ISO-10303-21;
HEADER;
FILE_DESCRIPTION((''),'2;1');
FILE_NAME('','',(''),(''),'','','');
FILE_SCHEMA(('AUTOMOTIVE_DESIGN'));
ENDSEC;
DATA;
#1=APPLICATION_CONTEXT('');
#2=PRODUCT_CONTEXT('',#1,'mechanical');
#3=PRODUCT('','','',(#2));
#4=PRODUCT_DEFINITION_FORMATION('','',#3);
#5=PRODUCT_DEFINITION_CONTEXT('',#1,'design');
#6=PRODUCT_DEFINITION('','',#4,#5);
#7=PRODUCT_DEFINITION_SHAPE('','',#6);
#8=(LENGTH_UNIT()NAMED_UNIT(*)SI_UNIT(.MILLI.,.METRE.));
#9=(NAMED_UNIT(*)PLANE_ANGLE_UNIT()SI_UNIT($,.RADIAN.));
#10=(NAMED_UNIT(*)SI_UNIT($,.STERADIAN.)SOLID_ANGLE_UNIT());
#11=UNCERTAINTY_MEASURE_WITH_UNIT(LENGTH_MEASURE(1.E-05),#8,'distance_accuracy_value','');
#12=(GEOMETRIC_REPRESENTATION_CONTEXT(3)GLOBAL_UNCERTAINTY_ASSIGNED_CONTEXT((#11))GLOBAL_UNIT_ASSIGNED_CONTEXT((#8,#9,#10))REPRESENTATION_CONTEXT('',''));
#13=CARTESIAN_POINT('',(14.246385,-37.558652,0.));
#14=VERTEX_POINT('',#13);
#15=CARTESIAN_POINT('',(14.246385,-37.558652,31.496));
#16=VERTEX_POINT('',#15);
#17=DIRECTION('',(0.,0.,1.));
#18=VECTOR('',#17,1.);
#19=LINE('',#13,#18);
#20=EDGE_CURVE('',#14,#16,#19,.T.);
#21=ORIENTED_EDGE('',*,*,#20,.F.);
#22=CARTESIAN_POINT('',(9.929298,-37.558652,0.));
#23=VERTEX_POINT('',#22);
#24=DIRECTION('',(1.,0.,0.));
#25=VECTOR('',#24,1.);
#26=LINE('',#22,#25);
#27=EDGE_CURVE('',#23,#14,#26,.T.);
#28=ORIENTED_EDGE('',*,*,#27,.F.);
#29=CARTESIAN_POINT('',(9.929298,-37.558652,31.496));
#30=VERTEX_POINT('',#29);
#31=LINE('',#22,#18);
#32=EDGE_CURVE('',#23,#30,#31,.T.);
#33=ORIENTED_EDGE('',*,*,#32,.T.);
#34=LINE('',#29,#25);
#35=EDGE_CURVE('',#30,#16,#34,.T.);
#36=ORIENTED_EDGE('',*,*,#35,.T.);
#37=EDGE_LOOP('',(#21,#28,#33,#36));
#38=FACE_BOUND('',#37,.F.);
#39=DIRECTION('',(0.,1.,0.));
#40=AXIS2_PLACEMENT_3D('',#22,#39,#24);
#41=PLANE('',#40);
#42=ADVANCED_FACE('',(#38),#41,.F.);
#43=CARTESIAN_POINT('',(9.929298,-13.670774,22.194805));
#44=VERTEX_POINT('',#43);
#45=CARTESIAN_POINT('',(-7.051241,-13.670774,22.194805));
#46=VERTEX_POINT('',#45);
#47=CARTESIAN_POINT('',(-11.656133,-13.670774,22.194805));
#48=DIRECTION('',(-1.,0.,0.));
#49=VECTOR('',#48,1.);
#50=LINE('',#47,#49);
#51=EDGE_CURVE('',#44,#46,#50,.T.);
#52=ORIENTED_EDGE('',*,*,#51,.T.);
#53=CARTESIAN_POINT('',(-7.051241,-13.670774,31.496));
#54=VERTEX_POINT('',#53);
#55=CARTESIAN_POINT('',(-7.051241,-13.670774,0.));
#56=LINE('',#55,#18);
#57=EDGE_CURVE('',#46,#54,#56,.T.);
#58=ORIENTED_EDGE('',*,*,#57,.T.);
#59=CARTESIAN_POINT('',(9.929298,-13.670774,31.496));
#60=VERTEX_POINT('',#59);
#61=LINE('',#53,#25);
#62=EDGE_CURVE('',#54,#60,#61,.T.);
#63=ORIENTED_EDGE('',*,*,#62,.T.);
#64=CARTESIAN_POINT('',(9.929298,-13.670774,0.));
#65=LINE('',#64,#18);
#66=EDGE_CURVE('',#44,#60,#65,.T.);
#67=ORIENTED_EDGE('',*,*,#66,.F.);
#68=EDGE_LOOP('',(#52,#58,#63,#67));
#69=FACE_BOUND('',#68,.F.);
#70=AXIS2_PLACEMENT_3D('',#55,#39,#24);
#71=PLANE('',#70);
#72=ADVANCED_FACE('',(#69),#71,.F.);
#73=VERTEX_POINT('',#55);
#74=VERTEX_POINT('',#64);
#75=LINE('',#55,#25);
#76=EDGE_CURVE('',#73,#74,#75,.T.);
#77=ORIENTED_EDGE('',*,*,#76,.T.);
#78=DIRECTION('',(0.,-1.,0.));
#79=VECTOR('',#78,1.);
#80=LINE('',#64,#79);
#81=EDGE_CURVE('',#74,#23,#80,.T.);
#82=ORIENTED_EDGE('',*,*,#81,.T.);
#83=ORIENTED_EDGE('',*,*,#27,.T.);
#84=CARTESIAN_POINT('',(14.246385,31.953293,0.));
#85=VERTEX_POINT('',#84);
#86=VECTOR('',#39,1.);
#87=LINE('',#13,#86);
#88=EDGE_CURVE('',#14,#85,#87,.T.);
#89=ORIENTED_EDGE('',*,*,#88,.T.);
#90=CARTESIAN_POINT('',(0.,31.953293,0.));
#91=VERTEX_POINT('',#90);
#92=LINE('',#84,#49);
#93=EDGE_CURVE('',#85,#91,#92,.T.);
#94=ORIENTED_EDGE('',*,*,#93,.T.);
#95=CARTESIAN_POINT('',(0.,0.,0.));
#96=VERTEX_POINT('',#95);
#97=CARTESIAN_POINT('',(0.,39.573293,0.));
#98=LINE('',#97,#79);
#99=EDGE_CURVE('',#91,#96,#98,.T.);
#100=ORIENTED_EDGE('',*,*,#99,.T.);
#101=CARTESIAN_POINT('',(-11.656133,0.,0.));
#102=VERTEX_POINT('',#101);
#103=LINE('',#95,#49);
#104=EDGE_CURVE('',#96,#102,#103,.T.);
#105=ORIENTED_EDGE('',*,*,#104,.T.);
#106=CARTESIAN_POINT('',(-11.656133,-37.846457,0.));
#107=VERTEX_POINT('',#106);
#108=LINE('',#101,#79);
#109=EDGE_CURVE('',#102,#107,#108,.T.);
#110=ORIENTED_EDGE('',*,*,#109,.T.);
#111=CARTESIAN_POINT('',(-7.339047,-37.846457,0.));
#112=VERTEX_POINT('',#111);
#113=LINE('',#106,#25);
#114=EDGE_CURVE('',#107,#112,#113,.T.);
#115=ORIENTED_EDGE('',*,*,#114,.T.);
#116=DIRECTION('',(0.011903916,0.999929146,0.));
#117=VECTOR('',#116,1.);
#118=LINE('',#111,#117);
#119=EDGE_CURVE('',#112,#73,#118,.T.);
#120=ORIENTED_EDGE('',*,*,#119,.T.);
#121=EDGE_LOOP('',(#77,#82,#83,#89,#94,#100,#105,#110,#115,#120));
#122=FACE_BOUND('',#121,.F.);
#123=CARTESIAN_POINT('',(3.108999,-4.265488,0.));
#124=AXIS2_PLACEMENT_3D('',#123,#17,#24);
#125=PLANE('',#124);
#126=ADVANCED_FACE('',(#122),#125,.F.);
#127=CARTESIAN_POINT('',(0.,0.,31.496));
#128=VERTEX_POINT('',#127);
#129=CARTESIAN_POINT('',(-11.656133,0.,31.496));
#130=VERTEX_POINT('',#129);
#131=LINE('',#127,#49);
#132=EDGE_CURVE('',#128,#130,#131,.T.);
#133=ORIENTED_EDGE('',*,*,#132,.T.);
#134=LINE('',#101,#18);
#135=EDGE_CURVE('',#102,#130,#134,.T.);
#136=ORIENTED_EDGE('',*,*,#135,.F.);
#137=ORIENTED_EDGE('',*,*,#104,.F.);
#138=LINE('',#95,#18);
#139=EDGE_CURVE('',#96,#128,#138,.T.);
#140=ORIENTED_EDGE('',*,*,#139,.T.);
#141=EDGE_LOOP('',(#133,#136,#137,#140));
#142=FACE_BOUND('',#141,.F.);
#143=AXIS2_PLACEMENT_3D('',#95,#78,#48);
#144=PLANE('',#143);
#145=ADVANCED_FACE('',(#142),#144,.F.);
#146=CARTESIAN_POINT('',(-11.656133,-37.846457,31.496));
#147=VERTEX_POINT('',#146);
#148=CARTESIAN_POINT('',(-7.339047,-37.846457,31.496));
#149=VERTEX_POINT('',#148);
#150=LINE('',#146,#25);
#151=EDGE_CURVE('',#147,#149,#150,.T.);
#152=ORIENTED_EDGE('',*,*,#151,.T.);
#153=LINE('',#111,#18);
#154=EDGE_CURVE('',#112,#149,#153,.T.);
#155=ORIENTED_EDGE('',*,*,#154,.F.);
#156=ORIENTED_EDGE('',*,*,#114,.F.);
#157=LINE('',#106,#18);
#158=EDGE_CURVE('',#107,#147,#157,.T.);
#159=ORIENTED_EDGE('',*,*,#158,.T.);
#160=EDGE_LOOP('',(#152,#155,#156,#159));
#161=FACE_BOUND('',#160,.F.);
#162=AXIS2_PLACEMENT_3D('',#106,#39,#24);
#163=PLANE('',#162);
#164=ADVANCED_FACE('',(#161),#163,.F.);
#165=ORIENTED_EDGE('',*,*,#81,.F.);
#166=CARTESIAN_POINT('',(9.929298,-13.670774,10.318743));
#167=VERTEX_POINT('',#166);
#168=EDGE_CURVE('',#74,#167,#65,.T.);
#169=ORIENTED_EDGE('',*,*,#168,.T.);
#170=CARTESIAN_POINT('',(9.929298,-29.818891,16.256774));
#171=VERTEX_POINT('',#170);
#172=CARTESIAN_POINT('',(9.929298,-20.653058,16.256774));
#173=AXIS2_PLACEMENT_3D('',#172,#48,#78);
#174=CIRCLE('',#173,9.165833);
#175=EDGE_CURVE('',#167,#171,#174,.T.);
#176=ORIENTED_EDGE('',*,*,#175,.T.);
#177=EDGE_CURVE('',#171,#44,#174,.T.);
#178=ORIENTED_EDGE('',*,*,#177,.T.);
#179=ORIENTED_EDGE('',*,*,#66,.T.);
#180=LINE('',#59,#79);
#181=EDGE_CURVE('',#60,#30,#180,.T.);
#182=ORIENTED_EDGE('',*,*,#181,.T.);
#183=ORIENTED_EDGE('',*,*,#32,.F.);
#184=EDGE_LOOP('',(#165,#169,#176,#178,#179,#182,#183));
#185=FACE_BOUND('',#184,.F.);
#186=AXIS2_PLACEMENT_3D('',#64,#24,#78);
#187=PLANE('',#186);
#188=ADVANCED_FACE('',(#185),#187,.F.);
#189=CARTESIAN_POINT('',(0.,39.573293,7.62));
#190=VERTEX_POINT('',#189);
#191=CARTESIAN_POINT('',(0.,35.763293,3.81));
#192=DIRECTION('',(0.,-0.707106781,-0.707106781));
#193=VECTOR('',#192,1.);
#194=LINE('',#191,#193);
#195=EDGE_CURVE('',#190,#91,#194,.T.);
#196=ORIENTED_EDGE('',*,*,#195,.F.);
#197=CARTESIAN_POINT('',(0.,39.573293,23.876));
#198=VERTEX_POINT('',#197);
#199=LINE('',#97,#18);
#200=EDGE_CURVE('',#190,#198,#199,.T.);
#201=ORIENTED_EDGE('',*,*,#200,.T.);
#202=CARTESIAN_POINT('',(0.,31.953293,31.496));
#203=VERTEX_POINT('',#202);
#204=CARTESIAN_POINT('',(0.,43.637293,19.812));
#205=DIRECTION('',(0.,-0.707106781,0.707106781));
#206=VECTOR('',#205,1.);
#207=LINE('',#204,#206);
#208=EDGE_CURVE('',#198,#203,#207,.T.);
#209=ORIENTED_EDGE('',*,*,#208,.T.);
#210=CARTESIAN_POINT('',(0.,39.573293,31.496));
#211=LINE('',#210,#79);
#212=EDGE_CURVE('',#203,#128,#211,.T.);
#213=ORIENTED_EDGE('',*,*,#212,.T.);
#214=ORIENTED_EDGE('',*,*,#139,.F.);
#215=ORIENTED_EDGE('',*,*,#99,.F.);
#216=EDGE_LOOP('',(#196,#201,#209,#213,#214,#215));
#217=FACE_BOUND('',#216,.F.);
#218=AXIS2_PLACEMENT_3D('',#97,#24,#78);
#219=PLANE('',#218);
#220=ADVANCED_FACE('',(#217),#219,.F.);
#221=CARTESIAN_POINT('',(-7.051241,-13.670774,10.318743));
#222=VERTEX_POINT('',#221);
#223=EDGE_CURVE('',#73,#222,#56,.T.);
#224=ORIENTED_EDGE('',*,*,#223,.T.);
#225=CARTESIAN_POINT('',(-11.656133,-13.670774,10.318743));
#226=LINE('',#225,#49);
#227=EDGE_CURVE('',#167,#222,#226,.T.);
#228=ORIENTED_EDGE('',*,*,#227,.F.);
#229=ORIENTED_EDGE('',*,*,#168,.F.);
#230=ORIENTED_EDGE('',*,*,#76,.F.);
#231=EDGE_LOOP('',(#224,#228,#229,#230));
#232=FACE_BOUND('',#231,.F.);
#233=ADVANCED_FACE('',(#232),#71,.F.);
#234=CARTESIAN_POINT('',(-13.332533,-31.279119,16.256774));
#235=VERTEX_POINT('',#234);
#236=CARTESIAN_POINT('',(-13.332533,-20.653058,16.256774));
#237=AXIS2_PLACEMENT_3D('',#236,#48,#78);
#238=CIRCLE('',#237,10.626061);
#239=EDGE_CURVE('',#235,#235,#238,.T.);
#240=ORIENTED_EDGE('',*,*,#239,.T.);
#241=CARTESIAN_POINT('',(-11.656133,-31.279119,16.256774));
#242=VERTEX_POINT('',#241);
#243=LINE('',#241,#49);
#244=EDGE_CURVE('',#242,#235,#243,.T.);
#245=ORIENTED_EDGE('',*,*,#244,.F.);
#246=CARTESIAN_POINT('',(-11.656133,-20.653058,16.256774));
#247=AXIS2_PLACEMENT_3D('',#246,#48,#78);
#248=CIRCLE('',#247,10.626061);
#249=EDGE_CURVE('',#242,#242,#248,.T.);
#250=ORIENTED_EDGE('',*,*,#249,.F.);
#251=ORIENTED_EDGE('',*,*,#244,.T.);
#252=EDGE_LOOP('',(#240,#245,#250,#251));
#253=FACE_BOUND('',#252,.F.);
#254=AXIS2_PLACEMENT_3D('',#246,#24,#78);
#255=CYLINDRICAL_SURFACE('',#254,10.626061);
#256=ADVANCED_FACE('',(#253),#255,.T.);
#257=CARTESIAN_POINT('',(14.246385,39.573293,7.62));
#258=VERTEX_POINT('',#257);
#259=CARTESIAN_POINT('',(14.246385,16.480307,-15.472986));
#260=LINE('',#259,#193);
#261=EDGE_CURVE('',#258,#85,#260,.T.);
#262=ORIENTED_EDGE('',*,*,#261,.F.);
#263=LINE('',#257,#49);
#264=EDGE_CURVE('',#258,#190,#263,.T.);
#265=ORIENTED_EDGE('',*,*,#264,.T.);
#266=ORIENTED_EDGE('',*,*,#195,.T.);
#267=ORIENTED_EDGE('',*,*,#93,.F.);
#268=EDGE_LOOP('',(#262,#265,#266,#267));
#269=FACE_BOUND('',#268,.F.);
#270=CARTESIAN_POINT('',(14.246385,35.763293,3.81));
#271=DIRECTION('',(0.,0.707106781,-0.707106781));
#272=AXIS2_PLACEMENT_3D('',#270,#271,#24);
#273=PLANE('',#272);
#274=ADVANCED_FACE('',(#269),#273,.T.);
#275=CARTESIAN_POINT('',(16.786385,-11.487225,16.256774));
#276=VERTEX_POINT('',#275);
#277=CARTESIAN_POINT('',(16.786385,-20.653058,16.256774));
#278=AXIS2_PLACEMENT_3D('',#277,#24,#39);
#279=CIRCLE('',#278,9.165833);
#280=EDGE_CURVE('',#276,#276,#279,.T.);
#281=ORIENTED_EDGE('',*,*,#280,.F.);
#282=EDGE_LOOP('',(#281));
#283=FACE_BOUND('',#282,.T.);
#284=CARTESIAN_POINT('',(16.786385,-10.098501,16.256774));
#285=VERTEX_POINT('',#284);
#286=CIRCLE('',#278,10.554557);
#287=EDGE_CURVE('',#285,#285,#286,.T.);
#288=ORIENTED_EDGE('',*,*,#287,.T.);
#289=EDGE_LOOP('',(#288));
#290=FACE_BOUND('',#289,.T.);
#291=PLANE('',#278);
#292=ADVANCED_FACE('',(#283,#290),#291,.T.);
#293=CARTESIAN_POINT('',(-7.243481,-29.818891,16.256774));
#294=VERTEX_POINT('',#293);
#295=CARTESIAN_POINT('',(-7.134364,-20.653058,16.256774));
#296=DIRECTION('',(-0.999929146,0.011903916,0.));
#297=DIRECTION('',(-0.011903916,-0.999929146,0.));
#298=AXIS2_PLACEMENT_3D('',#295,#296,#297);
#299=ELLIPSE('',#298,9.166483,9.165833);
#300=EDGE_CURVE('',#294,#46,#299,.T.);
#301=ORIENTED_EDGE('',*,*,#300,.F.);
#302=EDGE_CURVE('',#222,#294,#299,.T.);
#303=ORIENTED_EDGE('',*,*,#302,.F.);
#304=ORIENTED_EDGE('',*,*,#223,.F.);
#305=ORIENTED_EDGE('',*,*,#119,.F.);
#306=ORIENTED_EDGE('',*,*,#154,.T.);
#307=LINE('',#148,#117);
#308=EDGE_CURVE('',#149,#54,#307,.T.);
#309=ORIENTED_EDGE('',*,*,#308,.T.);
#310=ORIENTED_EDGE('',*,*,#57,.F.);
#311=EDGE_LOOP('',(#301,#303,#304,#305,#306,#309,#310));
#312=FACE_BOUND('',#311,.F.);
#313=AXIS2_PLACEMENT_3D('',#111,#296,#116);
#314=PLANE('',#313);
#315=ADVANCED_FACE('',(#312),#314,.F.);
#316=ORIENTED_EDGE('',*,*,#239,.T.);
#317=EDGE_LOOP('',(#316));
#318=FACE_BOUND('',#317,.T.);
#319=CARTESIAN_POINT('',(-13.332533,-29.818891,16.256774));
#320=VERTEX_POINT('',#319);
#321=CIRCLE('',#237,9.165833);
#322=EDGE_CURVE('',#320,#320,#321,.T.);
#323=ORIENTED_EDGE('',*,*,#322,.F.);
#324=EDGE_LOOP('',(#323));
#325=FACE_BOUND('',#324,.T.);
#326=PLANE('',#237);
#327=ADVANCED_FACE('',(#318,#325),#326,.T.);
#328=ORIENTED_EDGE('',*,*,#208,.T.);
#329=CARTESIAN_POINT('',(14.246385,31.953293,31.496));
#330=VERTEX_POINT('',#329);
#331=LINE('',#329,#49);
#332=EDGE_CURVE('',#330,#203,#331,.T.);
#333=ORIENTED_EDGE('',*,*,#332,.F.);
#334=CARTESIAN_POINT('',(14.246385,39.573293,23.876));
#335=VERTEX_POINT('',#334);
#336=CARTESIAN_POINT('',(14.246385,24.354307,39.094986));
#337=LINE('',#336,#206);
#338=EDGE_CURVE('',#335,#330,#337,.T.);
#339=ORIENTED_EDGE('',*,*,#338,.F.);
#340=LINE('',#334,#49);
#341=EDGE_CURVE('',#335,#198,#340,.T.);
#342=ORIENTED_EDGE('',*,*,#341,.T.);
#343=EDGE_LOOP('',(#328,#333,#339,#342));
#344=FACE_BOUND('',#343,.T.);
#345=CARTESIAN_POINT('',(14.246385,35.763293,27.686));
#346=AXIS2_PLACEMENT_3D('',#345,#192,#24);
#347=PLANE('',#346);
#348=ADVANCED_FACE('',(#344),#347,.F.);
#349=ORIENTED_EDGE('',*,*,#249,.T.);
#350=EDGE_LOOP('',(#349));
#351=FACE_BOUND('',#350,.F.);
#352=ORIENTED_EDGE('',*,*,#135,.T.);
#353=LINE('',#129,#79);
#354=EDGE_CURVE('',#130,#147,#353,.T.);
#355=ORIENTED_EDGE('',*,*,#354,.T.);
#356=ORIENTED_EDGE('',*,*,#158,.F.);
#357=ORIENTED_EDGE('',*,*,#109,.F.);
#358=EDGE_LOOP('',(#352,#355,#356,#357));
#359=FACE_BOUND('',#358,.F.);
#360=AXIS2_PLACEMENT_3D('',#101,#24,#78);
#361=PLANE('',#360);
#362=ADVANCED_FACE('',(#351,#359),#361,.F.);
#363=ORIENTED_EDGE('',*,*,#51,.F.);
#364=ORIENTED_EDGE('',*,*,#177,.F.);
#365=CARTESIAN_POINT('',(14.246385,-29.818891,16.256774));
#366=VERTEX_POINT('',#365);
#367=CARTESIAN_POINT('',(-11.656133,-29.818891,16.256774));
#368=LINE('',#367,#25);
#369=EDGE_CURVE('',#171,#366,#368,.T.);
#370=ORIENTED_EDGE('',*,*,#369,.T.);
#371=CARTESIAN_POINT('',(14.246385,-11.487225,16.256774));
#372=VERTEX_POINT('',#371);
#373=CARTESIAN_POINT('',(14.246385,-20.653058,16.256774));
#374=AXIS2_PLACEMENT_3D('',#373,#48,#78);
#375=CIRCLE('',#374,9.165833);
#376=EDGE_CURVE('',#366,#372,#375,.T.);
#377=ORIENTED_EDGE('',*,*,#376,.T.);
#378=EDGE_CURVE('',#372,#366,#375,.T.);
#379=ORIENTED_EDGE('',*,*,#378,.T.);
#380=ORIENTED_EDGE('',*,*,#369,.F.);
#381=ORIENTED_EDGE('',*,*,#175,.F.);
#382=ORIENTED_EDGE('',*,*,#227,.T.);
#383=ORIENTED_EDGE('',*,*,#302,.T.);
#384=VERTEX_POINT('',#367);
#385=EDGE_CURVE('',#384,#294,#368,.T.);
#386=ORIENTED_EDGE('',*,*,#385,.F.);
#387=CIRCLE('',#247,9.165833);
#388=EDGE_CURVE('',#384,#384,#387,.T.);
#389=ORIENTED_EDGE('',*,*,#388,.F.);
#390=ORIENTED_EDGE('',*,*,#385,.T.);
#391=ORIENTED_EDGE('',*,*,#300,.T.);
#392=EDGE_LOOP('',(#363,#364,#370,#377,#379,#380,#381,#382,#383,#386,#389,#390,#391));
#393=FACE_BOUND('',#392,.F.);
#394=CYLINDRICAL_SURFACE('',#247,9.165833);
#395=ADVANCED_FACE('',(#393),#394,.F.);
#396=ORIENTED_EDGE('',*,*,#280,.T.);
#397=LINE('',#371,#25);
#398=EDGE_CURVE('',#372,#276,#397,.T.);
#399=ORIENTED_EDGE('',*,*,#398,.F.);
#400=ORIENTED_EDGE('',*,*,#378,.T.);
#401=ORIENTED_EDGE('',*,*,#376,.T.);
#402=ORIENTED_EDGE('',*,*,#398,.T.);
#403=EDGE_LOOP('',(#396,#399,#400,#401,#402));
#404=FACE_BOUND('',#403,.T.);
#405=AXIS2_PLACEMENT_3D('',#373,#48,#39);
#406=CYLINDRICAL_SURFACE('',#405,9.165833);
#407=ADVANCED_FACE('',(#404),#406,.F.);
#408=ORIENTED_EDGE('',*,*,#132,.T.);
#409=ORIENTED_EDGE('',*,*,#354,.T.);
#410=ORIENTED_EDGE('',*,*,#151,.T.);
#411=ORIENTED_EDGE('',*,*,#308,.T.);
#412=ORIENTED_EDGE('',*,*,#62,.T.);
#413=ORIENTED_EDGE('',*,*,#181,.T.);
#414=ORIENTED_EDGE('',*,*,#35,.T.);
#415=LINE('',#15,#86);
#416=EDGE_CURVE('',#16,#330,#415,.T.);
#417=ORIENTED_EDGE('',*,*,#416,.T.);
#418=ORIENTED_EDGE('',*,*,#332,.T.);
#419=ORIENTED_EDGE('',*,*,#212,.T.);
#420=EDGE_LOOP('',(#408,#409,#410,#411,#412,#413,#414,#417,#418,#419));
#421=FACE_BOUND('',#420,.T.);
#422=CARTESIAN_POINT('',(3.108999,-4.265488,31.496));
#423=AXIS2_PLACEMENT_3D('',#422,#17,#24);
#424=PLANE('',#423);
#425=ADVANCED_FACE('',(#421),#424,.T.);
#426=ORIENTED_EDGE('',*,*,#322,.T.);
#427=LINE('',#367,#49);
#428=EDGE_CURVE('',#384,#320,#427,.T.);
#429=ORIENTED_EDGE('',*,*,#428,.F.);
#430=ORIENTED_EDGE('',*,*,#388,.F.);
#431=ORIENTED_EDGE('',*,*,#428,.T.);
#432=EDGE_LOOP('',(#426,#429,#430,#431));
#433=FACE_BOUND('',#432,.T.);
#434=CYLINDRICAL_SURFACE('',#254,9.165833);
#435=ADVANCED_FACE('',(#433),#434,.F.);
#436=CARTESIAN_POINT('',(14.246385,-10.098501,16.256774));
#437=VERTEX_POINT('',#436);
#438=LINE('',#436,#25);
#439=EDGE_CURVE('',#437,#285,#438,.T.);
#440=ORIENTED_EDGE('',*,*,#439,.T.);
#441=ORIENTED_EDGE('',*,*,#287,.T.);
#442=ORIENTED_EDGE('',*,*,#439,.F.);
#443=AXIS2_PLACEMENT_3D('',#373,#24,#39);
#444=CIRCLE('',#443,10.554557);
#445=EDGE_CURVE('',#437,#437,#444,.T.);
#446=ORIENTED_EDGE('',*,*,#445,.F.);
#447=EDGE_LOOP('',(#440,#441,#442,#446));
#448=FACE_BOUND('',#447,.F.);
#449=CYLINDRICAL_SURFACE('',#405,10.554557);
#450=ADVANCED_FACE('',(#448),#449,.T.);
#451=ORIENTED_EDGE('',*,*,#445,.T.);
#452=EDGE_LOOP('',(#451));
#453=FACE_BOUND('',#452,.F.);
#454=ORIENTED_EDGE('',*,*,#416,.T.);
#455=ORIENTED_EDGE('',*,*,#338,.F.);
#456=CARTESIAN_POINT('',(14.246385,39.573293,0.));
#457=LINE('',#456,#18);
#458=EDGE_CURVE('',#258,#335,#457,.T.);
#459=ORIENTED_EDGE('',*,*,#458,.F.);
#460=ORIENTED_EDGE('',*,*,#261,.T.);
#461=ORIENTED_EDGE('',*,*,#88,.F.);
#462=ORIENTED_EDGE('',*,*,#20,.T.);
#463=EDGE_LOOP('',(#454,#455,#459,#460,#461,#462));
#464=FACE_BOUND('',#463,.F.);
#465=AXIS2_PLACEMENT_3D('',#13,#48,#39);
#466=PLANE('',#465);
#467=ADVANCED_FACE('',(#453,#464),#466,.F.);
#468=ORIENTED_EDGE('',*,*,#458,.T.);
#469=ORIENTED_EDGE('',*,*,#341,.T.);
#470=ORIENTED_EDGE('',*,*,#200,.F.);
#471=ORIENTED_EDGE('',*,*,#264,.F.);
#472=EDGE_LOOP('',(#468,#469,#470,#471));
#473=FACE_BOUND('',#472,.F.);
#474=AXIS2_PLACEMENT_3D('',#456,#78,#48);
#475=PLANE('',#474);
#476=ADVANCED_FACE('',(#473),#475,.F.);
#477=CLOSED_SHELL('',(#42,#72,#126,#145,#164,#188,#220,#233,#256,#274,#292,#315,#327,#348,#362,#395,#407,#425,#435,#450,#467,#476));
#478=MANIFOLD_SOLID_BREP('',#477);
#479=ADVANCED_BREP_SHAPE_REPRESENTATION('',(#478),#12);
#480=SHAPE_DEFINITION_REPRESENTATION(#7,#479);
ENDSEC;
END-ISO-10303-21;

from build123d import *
from build123d import SkipClean  # not in build123d's __all__

# Parameters (mm, degrees)
F1_DEPTH = 31.496
F3_SIZE  = 7.62
F2_R     = 9.165833061
F4_DEPTH = 25.9035180712
F2_R_2   = 10.6260607341
F5_DEPTH = 1.6764
F6_R     = 10.5545569786
F6_R_2   = 9.165833061
F7_DEPTH = 2.54


with BuildPart() as f1:
    # F0 (on Top) → F1 (new body)
    with BuildSketch(Plane.XY):
        Polygon((0, 39.5732931793), (0, 0), (-11.656133458, 0), (-11.656133458, -37.8464572132), (-7.3390468024, -37.8464572132), (-7.0512411185, -13.6707741767), (9.9292984232, -13.6707741767), (9.9292984232, -37.5586524606), (14.2463846132, -37.5586524606), (14.2463846132, 0), (14.2463846132, 39.5732931793), align=None)
    extrude(amount=F1_DEPTH)

    # F3
    f3_edges = [f1.edges().sort_by_distance(p)[0] for p in [
        (7.123192, 39.573293, 31.496),
        (7.123192, 39.573293, 0),
    ]]
    chamfer(f3_edges, length=F3_SIZE)

    # F2 (on face) → F4 (cut, through all)
    with BuildSketch(Plane(origin=(-11.656133458, 0, 0), x_dir=(0, -1, 0), z_dir=(-1, 0, 0))):
        with Locations((20.6530578434, 16.2567738444)):
            Circle(F2_R)
    extrude(amount=-F4_DEPTH, mode=Mode.SUBTRACT)

    # F2 (on face) → F5 (join)
    with BuildSketch(Plane(origin=(-11.656133458, 0, 0), x_dir=(0, -1, 0), z_dir=(-1, 0, 0))):
        with Locations((20.6530578434, 16.2567738444)):
            Circle(F2_R_2)
        with Locations((20.6530578434, 16.2567738444)):
            Circle(F2_R, mode=Mode.SUBTRACT)
    extrude(amount=F5_DEPTH)

    # F6 (on face) → F7 (join)
    with BuildSketch(Plane.YZ.offset(14.2463846132)):
        with Locations((-20.6530578434, 16.2567738444)):
            Circle(F6_R)
        with Locations((-20.6530578434, 16.2567738444)):
            Circle(F6_R_2, mode=Mode.SUBTRACT)
    with SkipClean():  # cleaning this boolean's faces spoils the solid; the shape is the same uncleaned
        extrude(amount=F7_DEPTH)


solid = f1.part
